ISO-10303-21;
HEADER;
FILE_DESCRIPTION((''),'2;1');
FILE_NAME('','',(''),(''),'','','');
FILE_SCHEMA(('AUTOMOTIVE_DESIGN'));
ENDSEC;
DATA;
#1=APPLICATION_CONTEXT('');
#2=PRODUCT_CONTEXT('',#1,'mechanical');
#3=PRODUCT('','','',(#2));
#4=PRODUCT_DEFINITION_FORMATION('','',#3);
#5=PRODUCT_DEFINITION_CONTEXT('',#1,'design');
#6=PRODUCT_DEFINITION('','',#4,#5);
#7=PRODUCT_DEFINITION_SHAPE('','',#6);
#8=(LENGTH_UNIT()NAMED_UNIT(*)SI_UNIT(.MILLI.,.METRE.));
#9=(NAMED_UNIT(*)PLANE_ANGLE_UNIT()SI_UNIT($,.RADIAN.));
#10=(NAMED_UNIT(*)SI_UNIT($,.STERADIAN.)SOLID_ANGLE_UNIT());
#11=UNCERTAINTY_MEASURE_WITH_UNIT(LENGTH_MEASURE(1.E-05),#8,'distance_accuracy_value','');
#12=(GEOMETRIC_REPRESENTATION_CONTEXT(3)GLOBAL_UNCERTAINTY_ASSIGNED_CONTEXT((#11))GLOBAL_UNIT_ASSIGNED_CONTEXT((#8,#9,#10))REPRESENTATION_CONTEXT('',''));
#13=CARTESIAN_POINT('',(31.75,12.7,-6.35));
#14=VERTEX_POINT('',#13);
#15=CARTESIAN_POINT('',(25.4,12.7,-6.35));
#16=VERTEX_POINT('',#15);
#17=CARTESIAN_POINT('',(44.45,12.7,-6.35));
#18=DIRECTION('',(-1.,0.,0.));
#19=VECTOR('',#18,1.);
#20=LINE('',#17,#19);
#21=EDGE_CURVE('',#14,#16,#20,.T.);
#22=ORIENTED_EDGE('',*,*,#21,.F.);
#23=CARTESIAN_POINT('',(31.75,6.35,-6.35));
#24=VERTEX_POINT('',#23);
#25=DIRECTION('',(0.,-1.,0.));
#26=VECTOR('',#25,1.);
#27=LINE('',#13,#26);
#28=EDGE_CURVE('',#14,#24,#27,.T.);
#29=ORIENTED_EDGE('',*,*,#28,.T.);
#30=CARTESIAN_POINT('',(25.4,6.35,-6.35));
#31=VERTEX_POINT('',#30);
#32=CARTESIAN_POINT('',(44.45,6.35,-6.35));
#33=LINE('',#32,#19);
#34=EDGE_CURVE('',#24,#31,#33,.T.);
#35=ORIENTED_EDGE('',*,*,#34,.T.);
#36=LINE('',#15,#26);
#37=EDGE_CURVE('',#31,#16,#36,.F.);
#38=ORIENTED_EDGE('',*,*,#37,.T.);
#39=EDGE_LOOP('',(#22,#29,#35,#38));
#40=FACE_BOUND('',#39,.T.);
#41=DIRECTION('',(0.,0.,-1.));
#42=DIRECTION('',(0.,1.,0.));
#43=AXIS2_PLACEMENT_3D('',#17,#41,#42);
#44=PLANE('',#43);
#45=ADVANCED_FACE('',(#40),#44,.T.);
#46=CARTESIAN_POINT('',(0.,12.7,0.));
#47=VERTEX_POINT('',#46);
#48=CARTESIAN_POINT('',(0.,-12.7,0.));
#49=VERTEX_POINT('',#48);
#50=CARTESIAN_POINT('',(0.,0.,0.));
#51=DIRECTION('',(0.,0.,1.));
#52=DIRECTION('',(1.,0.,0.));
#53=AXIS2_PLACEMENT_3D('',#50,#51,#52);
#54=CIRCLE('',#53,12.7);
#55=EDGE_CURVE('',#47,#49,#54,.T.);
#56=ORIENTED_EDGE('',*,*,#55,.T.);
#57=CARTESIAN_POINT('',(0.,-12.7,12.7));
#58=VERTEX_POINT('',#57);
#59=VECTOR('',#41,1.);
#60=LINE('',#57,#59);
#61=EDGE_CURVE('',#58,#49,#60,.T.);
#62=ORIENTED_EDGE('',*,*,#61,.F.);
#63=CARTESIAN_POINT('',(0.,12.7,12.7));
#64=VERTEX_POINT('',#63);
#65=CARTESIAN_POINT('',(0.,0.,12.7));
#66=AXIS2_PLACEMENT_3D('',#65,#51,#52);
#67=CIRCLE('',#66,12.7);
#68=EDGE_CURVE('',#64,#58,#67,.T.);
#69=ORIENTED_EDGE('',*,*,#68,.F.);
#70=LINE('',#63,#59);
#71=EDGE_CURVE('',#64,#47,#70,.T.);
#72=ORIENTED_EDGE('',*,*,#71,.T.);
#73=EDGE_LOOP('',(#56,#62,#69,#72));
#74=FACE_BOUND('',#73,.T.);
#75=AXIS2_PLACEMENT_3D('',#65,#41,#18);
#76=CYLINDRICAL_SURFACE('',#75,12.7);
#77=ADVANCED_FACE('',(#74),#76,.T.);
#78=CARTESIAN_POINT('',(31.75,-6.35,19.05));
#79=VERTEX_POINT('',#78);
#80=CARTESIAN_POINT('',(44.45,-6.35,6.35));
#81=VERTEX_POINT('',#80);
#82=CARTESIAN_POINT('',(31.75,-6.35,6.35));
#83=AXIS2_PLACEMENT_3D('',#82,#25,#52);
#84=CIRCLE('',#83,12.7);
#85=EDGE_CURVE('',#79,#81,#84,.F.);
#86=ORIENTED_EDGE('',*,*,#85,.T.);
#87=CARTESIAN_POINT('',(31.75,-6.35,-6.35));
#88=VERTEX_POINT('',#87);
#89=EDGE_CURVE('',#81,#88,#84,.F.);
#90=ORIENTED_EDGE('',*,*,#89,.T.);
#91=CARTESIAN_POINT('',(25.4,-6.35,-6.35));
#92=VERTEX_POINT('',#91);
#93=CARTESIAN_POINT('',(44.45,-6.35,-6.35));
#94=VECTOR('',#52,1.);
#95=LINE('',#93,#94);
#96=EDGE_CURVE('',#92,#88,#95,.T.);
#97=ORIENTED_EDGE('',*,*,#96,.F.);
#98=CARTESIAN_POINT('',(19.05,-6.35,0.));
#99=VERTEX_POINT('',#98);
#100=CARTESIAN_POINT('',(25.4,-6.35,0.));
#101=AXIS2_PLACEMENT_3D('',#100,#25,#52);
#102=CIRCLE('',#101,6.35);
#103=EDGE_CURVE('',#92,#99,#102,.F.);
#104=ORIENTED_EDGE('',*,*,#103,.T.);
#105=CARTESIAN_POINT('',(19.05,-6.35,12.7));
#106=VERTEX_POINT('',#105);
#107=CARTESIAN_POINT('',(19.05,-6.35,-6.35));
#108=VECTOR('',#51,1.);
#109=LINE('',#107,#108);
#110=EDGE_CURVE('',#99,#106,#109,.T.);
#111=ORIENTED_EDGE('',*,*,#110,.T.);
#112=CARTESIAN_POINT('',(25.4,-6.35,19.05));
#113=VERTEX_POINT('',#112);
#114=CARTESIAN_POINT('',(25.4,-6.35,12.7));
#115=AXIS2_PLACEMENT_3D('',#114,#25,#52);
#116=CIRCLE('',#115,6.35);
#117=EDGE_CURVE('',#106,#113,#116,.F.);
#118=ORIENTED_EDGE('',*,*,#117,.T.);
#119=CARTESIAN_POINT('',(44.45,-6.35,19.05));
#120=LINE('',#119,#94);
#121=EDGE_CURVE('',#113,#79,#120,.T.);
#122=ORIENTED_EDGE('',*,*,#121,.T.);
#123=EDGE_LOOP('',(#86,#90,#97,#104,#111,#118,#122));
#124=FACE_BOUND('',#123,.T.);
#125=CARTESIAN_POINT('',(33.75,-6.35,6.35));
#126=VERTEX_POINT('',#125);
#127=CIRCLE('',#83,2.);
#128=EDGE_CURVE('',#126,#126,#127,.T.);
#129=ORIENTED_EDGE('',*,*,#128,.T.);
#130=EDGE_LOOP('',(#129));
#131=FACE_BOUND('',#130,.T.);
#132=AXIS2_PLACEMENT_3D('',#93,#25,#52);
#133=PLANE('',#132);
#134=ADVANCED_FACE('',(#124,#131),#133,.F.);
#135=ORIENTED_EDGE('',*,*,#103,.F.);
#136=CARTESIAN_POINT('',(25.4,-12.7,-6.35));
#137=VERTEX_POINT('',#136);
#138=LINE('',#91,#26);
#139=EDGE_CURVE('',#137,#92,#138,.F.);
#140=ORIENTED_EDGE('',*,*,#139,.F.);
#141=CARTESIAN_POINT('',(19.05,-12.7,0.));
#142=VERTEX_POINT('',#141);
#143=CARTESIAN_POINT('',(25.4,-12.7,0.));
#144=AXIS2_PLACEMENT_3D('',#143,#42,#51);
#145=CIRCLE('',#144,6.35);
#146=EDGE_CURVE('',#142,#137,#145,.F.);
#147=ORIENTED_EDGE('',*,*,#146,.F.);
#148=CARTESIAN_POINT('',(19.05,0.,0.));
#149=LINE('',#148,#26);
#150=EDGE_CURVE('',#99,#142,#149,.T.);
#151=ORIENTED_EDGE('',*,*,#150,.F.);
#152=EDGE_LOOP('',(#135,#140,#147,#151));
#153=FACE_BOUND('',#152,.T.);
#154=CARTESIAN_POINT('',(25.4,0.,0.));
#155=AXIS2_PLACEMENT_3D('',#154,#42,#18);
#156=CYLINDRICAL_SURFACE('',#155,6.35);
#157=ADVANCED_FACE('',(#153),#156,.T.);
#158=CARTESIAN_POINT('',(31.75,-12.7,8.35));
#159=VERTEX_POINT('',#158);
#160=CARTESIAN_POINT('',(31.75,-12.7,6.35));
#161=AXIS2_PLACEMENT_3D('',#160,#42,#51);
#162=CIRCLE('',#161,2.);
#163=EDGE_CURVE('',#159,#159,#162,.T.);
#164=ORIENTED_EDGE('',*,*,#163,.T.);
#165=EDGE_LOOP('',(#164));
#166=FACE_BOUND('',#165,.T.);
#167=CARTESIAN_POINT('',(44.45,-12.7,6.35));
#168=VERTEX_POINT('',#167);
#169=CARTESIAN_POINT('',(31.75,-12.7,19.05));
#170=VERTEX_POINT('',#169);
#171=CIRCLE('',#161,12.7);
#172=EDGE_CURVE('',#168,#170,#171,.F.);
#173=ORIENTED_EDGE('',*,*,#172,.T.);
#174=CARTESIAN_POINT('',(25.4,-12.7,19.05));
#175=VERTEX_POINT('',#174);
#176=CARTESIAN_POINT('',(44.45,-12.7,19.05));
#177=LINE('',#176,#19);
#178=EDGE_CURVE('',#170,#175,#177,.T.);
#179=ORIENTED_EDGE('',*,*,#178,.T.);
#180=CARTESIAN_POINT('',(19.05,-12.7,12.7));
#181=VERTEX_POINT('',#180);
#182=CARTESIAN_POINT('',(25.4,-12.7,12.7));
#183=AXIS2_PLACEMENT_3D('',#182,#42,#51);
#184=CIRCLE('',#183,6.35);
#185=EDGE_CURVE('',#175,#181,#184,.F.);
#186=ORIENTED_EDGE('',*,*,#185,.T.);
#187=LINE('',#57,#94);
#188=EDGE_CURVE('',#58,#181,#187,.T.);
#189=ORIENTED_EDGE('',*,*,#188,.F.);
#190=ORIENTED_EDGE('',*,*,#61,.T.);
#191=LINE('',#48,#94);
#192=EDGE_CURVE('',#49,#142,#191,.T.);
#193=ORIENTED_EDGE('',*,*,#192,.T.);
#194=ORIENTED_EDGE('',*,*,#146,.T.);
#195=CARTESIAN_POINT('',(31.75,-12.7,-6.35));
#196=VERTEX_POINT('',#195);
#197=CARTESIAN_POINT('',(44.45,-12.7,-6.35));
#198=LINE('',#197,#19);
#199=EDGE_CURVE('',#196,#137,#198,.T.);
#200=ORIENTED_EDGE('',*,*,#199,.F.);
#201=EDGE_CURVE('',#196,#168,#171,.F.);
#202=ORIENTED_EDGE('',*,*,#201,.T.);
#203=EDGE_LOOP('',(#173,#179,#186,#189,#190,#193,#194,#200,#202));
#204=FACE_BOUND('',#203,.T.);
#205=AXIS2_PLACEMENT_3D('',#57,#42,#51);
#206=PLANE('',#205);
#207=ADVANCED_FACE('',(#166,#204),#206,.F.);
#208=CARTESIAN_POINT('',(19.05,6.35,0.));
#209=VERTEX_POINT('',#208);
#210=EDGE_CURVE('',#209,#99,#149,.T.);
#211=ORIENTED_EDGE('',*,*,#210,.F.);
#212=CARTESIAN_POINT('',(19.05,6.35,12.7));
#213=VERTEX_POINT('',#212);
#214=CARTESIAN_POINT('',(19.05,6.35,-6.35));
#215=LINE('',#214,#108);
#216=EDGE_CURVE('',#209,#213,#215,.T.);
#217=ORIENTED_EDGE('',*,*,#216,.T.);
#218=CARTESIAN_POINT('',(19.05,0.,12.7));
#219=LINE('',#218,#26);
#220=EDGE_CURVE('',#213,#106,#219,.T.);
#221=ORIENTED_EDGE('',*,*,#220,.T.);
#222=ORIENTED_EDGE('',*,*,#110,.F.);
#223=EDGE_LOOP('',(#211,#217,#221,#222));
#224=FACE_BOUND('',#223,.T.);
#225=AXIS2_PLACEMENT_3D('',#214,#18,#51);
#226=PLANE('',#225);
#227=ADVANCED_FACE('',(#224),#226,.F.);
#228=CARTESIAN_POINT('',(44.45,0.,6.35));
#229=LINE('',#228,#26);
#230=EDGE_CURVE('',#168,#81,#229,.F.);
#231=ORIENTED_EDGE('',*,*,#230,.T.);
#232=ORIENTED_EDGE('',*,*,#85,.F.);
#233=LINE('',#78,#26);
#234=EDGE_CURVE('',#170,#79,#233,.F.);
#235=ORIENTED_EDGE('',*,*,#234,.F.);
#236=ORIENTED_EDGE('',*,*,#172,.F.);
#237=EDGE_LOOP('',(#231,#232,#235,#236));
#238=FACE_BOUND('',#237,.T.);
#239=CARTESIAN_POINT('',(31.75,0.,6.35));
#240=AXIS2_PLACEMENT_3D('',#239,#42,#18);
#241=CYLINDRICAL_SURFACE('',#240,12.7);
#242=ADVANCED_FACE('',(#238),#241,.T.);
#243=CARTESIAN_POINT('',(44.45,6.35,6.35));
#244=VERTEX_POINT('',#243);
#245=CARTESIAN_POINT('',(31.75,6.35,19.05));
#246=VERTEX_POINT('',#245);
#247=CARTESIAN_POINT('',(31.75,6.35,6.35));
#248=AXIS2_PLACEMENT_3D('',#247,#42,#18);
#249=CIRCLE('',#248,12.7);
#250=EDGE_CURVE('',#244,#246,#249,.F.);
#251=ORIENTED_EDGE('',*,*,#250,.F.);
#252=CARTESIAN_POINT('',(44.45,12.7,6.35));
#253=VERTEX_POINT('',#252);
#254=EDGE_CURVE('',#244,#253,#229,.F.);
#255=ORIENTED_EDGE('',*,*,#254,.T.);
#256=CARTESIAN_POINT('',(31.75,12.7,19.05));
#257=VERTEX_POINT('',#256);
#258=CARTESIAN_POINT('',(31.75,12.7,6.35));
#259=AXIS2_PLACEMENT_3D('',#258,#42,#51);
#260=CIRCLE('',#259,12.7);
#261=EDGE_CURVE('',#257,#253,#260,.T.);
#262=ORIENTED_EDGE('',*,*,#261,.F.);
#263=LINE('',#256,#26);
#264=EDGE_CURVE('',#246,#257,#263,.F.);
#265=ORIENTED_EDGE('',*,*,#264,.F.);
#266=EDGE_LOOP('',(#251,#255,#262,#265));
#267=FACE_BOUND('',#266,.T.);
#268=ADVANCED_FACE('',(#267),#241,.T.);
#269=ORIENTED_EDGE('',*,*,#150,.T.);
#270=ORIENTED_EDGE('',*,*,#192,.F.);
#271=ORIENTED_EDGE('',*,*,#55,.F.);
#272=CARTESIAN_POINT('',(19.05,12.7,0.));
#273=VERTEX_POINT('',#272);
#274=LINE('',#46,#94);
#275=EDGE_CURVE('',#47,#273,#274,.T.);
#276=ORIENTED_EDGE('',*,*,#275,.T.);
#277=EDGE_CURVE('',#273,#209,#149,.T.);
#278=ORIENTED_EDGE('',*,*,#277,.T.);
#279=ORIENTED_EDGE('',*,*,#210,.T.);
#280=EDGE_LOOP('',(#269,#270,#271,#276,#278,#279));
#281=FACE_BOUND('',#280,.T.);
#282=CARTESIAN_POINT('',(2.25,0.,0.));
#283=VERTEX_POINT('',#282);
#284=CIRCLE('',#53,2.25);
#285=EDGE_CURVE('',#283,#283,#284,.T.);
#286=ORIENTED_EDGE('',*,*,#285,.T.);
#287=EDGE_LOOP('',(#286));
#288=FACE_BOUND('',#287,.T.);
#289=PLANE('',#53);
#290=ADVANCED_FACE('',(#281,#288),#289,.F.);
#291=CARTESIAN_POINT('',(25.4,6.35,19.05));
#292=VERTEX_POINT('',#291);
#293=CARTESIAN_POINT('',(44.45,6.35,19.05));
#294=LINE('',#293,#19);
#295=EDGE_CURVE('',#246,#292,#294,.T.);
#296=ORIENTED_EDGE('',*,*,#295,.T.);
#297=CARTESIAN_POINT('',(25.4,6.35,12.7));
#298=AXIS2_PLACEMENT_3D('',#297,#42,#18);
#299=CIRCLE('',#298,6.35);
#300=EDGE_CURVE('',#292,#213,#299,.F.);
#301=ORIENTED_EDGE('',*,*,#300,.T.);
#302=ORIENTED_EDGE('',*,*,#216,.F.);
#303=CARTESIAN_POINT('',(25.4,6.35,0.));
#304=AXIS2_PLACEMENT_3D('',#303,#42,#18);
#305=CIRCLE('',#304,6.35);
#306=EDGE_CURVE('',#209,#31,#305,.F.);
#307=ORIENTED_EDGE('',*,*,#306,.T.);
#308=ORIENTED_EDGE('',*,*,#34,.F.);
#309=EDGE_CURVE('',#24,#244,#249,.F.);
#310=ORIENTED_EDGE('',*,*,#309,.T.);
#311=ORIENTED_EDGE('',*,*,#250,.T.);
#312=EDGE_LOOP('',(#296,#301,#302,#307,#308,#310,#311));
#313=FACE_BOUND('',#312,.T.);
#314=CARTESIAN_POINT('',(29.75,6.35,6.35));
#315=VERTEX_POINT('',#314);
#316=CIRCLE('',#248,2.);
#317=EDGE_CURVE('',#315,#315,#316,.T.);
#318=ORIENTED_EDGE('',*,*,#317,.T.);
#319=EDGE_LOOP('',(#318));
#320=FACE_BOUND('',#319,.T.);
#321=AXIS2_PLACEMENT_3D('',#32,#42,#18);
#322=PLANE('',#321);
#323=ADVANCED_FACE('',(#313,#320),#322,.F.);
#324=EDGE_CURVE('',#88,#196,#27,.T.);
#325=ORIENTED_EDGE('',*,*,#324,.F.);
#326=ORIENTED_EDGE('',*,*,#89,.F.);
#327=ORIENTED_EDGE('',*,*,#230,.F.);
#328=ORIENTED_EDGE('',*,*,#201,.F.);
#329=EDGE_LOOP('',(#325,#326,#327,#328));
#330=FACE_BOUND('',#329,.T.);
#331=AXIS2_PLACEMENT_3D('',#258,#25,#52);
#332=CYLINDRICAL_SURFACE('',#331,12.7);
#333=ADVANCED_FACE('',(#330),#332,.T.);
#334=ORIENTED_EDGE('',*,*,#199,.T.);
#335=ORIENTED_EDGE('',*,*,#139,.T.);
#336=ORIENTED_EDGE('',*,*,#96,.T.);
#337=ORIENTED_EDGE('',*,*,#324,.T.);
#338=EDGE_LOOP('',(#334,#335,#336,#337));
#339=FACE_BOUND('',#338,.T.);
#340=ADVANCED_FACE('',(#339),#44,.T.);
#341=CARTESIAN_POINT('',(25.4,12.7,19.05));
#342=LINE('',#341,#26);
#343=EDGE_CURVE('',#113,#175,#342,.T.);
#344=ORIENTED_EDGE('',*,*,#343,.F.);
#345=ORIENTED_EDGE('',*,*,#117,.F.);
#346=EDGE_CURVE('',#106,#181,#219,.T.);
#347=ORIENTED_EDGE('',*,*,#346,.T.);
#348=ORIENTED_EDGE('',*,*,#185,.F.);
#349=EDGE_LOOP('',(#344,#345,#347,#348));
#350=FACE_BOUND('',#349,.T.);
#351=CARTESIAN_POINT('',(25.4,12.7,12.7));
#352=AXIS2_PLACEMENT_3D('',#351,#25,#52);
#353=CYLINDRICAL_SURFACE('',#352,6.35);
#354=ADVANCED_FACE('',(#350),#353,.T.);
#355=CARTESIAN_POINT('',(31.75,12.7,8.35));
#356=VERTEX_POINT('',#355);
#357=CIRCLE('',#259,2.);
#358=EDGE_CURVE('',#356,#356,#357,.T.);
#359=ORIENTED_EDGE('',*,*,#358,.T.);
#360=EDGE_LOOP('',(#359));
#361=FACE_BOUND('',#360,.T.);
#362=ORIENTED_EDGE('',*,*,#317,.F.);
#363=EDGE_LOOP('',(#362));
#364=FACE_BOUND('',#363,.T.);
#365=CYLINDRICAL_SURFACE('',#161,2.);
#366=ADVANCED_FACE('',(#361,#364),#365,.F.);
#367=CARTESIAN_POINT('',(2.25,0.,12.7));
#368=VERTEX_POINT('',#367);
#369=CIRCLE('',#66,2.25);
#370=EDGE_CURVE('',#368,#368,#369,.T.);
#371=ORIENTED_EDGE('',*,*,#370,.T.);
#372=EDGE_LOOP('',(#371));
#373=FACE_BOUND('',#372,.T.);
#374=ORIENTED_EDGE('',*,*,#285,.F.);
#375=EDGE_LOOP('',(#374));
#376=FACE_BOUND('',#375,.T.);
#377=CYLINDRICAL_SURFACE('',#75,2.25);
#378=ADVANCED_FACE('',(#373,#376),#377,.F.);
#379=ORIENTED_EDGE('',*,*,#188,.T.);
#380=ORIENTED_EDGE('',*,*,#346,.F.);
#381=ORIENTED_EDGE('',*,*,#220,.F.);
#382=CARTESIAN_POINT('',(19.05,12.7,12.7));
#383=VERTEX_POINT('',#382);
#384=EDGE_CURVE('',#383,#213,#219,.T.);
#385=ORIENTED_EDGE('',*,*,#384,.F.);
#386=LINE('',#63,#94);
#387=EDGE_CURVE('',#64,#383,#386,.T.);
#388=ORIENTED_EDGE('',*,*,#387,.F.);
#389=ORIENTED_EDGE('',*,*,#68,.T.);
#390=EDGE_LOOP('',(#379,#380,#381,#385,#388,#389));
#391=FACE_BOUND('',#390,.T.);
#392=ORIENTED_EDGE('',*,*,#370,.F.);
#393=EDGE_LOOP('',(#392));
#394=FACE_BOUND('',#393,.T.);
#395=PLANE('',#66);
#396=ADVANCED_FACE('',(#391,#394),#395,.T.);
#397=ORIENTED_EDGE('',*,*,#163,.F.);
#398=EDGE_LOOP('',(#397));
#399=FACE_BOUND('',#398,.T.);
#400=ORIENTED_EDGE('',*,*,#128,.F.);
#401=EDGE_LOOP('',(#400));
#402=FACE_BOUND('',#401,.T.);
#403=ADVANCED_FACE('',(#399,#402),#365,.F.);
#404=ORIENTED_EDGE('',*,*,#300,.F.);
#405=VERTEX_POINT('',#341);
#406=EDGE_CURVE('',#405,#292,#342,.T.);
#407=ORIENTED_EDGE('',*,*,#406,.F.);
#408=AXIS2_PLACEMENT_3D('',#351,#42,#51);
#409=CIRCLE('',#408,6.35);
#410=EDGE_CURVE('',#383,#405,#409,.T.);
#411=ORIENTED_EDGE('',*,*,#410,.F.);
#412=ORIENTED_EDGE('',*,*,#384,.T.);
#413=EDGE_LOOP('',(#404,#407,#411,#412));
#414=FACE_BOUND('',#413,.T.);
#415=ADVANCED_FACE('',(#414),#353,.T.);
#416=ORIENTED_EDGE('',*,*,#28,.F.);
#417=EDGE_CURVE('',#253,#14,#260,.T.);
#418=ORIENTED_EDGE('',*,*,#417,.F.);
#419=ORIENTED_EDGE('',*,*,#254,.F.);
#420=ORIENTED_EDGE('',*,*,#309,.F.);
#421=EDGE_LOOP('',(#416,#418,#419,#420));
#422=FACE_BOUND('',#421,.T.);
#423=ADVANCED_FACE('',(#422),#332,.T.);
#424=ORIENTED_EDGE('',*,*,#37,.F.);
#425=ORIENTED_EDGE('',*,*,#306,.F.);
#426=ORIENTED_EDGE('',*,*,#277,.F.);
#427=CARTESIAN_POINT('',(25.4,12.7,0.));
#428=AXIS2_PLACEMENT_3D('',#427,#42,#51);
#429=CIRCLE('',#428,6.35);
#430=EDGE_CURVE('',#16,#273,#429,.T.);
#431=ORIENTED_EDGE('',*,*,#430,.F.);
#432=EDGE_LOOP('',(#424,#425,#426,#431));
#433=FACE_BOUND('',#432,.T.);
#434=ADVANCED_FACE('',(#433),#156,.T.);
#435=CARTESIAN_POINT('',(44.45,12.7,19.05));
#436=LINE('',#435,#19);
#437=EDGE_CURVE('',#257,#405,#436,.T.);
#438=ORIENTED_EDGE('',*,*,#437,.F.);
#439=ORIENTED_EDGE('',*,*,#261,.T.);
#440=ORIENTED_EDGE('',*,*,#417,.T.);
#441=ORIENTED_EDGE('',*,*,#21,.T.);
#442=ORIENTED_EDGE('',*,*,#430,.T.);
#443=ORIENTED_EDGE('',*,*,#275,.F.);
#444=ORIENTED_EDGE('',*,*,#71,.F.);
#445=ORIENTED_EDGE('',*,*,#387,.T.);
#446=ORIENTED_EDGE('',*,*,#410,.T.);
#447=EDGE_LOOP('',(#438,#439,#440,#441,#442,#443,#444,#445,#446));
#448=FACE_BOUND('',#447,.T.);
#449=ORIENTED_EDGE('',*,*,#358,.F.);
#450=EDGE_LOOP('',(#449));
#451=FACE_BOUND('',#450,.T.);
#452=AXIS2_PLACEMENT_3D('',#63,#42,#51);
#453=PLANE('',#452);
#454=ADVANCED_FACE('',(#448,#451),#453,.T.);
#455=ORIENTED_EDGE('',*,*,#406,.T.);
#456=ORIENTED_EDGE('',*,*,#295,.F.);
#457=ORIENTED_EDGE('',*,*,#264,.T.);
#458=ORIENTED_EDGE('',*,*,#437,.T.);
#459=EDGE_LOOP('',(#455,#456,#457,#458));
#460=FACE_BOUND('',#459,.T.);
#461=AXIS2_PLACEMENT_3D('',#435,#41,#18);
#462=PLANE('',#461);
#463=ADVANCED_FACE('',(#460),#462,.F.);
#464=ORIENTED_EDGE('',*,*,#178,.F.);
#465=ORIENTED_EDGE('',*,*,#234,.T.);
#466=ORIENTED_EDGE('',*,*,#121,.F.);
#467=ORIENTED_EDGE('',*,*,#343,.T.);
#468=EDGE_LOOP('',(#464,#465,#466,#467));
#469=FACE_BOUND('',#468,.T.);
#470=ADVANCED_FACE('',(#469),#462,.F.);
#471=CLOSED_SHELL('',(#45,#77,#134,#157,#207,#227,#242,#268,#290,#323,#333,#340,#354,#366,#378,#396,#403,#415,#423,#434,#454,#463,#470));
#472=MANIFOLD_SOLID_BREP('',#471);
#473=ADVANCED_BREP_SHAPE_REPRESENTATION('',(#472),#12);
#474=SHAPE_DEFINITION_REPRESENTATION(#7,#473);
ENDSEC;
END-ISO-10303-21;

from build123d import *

# Parameters (mm, degrees)
SKETCH1_R           = 2.25
BOSS_EXTRUDE1_DEPTH = 12.7
SKETCH2_W           = 25.4
SKETCH2_H           = 25.4
BOSS_EXTRUDE2_DEPTH = 25.4
SKETCH3_W           = 25.4
SKETCH3_H           = 12.7
CUT_EXTRUDE1_DEPTH  = 25.4
FILLET2_R           = 6.35
FILLET3_R           = 12.7
SKETCH4_R           = 2
CUT_EXTRUDE2_DEPTH  = 25.4


with BuildPart() as part:
    # Sketch1 → Boss-Extrude1 (new body)
    with BuildSketch(Plane.XY):
        with BuildLine():
            Line((19.05, 12.7), (0, 12.7))
            ThreePointArc((0, 12.7), (-12.7, 0), (0, -12.7))
            Line((0, -12.7), (19.05, -12.7))
            Line((19.05, -12.7), (19.05, 12.7))
        make_face()
        Circle(SKETCH1_R, mode=Mode.SUBTRACT)
    extrude(amount=BOSS_EXTRUDE1_DEPTH)

    # Sketch2 → Boss-Extrude2 (add)
    with BuildSketch(Plane(origin=(19.05, 0, 0), x_dir=(0, 0, -1), z_dir=(1, 0, 0))):
        with Locations((-6.35, 0)):
            Rectangle(SKETCH2_W, SKETCH2_H)
    extrude(amount=BOSS_EXTRUDE2_DEPTH)

    # Sketch3 → Cut-Extrude1 (cut)
    with BuildSketch(Plane.XY.offset(19.05)):
        with Locations((31.75, 0)):
            Rectangle(SKETCH3_W, SKETCH3_H)
    extrude(amount=-CUT_EXTRUDE1_DEPTH, mode=Mode.SUBTRACT)

    # Fillet2
    fillet2_edges = [part.edges().sort_by_distance(p)[0] for p in [
        (19.05, 9.525, 19.05),
        (19.05, -9.525, 19.05),
        (19.05, -9.525, -6.35),
        (19.05, 9.525, -6.35),
    ]]
    fillet(fillet2_edges, radius=FILLET2_R - 0.0001)  # a hair under: the kernel refuses the full size

    # Fillet3
    fillet3_edges = [part.edges().sort_by_distance(p)[0] for p in [
        (44.45, 9.525, 19.05),
        (44.45, -9.525, 19.05),
        (44.45, 9.525, -6.35),
        (44.45, -9.525, -6.35),
    ]]
    fillet(fillet3_edges, radius=FILLET3_R - 0.0001)  # a hair under: the kernel refuses the full size

    # Sketch4 → Cut-Extrude2 (cut)
    with BuildSketch(Plane(origin=(0, 12.7, 0), x_dir=(1, 0, 0), z_dir=(0, 1, 0))):
        with Locations(Location((31.75, -6.35, 0), (0, 0, 270))):
            Circle(SKETCH4_R)
    extrude(amount=-CUT_EXTRUDE2_DEPTH, mode=Mode.SUBTRACT)


solid = part.part
